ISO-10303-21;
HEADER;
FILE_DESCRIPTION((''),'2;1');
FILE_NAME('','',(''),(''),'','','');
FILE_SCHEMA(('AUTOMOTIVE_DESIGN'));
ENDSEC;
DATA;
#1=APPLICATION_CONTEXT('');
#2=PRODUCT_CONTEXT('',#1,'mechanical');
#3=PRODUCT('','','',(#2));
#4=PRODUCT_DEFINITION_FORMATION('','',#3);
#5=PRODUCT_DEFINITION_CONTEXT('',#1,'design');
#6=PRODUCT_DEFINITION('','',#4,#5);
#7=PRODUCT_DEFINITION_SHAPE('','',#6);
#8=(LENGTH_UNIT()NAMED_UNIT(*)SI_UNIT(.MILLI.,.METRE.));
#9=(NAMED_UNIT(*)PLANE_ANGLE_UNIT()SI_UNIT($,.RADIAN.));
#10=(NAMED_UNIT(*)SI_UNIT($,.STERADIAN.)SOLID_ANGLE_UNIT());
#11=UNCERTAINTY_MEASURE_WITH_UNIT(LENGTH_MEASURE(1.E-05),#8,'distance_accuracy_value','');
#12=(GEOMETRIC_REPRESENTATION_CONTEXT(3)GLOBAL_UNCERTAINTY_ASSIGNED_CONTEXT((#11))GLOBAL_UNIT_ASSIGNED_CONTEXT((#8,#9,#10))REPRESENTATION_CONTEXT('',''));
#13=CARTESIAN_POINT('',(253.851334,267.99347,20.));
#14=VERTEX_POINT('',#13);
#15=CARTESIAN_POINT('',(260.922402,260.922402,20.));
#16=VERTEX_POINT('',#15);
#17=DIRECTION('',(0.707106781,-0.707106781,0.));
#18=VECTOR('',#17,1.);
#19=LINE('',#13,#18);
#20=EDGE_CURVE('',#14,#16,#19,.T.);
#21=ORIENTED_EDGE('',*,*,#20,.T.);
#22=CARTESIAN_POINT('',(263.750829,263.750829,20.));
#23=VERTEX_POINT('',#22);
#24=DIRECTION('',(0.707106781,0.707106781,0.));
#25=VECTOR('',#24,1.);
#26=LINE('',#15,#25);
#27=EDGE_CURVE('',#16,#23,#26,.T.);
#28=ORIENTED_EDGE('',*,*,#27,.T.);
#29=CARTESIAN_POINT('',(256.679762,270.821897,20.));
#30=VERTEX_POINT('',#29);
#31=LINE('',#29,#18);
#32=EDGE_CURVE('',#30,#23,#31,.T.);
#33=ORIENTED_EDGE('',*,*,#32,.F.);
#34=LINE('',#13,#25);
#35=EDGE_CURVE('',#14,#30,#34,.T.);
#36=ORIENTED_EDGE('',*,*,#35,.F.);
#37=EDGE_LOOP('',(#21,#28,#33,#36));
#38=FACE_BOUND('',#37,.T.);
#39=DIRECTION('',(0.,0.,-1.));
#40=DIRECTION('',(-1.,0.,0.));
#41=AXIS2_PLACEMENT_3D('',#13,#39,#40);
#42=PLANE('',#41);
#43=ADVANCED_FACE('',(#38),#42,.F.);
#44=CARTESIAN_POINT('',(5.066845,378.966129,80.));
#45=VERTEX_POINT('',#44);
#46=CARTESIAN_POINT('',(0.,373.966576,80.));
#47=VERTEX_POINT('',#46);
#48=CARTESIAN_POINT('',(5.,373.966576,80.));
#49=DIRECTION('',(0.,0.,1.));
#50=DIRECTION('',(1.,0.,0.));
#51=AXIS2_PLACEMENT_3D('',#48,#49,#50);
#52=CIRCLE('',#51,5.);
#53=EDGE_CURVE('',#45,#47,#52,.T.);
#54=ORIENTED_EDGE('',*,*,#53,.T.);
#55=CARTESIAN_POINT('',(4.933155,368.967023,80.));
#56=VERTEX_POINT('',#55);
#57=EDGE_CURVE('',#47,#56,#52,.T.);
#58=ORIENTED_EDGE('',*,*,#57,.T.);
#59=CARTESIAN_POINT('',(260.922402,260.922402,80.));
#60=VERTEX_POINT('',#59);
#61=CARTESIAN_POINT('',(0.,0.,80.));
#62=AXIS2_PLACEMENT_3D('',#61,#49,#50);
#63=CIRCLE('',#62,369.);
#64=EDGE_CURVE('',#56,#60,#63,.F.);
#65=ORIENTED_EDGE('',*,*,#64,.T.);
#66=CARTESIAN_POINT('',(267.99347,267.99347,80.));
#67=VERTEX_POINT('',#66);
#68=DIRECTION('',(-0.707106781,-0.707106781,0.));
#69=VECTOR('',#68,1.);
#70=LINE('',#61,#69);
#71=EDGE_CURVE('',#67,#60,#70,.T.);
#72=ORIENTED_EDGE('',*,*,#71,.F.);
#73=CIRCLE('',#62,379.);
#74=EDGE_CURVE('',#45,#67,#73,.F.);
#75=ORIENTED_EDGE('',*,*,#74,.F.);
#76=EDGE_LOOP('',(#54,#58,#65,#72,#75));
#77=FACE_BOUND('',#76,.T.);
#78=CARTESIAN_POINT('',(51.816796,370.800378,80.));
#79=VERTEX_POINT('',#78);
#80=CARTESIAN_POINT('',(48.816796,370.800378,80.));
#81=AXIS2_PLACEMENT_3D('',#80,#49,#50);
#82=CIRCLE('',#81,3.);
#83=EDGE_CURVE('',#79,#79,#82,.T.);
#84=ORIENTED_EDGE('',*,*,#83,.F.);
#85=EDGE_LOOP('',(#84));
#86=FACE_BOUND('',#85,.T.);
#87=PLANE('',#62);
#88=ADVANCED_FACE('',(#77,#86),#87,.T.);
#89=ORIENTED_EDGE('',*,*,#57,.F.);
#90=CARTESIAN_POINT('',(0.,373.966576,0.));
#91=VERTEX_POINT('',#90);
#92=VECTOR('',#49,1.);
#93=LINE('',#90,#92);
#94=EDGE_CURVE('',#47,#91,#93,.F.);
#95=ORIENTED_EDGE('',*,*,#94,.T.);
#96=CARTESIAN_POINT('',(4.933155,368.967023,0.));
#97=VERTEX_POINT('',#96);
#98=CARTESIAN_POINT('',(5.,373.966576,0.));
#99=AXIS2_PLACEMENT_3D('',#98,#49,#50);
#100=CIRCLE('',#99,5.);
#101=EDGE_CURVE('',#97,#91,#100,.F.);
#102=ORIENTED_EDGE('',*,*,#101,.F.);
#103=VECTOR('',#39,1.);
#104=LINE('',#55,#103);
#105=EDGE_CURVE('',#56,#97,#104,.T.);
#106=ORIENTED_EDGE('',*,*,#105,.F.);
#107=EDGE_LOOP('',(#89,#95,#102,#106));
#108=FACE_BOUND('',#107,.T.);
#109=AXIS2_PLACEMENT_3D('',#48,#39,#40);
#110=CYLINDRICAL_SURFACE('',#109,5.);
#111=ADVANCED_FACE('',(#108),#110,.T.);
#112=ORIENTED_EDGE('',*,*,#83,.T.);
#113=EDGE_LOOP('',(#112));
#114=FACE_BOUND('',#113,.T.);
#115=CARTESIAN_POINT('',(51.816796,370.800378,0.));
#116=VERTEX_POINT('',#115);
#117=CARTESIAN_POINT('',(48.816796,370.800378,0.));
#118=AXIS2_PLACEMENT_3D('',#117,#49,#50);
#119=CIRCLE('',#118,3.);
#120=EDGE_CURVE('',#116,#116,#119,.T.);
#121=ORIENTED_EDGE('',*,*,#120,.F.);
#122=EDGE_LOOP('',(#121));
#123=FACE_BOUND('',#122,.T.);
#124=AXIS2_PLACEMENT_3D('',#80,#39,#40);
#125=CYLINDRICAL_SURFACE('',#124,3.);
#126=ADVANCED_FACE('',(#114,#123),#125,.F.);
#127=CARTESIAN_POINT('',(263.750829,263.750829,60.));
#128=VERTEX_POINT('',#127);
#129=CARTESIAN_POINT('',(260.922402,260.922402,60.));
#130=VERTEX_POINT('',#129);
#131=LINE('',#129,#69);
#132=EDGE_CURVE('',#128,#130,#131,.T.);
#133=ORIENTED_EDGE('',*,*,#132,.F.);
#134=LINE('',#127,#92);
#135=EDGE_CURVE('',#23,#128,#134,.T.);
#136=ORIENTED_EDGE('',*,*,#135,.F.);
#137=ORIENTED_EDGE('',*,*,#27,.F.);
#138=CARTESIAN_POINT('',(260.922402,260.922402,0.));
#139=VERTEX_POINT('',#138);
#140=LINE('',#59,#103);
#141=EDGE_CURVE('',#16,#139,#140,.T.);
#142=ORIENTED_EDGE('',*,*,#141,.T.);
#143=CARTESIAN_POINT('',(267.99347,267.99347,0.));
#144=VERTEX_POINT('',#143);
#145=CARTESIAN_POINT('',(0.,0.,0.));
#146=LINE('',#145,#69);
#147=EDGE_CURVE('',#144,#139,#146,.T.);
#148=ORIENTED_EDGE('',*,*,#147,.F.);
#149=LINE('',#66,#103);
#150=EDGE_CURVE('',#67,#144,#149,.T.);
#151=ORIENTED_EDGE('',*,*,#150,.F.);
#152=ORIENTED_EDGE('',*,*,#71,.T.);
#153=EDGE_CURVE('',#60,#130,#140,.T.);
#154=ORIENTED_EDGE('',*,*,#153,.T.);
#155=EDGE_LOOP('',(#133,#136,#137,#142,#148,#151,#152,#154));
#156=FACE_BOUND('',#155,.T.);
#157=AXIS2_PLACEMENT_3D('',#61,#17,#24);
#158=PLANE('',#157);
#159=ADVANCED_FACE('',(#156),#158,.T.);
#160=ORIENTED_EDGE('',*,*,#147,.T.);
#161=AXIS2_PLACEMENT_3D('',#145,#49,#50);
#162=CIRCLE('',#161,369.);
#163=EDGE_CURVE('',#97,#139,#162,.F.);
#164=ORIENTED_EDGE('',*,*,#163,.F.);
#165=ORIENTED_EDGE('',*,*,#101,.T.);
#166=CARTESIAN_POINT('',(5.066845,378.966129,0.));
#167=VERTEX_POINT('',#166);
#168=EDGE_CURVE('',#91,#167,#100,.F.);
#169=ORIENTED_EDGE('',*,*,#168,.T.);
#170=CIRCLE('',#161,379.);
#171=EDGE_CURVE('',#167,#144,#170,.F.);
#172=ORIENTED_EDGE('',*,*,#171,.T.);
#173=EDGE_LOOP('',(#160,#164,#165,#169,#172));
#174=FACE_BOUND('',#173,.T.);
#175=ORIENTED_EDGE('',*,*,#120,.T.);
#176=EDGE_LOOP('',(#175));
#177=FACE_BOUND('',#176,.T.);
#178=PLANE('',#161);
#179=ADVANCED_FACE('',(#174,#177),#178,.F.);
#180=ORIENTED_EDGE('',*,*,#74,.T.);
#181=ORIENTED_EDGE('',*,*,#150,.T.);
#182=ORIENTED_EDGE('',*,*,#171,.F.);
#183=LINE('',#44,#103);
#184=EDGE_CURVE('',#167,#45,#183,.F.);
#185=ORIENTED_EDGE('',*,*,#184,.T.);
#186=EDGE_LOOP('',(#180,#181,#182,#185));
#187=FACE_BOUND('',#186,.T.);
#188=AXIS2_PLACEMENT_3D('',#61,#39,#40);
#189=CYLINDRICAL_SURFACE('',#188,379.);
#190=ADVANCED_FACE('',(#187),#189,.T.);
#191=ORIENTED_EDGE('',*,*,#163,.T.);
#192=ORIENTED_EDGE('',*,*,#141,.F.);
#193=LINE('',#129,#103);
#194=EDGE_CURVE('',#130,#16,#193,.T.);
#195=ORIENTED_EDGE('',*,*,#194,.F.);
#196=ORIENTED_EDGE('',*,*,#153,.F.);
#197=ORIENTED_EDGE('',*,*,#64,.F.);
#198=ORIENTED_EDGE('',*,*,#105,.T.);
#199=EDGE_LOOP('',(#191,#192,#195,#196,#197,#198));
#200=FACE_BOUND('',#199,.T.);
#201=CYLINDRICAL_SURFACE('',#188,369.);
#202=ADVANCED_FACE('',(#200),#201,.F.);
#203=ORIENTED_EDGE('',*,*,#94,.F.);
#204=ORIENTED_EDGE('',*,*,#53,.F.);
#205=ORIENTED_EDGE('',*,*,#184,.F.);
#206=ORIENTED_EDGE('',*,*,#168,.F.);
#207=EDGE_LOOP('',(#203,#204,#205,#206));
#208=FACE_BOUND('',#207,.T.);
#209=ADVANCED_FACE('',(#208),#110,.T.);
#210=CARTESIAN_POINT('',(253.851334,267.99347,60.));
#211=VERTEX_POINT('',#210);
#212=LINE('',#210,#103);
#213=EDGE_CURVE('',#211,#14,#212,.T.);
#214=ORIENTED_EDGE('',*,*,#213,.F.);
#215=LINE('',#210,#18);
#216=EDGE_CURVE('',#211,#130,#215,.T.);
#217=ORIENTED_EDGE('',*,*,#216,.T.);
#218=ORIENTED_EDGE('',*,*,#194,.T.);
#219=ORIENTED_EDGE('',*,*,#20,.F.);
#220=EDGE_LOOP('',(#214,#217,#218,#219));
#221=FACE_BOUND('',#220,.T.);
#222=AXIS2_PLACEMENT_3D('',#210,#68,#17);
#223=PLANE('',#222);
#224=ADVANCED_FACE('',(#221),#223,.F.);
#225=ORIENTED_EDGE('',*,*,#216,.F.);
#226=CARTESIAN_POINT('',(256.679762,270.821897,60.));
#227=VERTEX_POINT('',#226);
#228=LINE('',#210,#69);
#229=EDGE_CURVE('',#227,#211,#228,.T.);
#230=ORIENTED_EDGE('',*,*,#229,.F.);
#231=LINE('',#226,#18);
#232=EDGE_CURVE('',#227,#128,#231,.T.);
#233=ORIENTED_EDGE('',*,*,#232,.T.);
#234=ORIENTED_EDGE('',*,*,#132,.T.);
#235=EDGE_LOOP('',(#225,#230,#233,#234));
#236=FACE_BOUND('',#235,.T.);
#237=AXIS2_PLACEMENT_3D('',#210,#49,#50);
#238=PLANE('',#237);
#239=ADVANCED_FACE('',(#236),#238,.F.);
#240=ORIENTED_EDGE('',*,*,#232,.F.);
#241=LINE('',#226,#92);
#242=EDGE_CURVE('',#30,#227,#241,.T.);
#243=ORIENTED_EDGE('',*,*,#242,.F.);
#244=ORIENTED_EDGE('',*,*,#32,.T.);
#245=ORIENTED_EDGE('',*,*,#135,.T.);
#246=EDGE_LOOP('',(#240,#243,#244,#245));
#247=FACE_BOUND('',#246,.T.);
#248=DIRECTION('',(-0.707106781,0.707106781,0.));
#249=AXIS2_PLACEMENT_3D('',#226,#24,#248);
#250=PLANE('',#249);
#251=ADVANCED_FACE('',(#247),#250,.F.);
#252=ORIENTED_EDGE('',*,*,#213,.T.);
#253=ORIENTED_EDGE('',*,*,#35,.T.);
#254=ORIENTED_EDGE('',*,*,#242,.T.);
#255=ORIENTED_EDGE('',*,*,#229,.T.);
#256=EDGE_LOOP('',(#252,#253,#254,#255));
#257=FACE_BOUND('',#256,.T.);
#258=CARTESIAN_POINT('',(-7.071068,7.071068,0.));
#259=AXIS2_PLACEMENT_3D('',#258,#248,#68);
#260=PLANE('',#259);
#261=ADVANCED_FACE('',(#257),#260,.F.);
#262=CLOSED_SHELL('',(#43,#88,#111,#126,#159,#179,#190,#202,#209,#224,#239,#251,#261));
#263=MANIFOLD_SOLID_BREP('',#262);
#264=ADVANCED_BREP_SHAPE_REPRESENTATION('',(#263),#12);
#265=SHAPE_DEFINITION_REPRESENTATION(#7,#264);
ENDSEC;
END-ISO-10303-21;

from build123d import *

# Parameters (mm, degrees)
ESQUISSE1_R             = 3
BOSS_EXTRU_1_DEPTH      = 80
CONG_2_R                = 5
ESQUISSE2_W             = 40
ESQUISSE2_H             = 4
ENL_V_MAT_EXTRU_1_DEPTH = 10


with BuildPart() as part:
    # Esquisse1 → Boss.-Extru.1 (new body)
    with BuildSketch(Plane.XY):
        with BuildLine():
            ThreePointArc((0, 379), (145.037020866, 350.150342822), (267.99347007, 267.99347007))
            Line((267.99347007, 267.99347007), (260.922402258, 260.922402258))
            ThreePointArc((260.922402258, 260.922402258), (141.210186543, 340.911547497), (0, 369))
            Line((0, 369), (0, 379))
        make_face()
        with Locations((48.81679589, 370.800378154)):
            Circle(ESQUISSE1_R, mode=Mode.SUBTRACT)
    extrude(amount=BOSS_EXTRU_1_DEPTH)

    # Congé2
    cong_2_edges = [part.edges().sort_by_distance(p)[0] for p in [
        (0, 369, 40),
        (0, 379, 40),
    ]]
    fillet(cong_2_edges, radius=CONG_2_R - 0.0001)  # a hair under: the kernel refuses the full size

    # Esquisse2 → Enlèv. mat.-Extru.1 (cut)
    with BuildSketch(Plane(origin=(0, 0, 0), x_dir=(0, 0, -1), z_dir=(0.7071067811865448, -0.7071067811865503, 0))):
        with Locations((-40, 371)):
            Rectangle(ESQUISSE2_W, ESQUISSE2_H)
    extrude(amount=-ENL_V_MAT_EXTRU_1_DEPTH, mode=Mode.SUBTRACT)


solid = part.part
